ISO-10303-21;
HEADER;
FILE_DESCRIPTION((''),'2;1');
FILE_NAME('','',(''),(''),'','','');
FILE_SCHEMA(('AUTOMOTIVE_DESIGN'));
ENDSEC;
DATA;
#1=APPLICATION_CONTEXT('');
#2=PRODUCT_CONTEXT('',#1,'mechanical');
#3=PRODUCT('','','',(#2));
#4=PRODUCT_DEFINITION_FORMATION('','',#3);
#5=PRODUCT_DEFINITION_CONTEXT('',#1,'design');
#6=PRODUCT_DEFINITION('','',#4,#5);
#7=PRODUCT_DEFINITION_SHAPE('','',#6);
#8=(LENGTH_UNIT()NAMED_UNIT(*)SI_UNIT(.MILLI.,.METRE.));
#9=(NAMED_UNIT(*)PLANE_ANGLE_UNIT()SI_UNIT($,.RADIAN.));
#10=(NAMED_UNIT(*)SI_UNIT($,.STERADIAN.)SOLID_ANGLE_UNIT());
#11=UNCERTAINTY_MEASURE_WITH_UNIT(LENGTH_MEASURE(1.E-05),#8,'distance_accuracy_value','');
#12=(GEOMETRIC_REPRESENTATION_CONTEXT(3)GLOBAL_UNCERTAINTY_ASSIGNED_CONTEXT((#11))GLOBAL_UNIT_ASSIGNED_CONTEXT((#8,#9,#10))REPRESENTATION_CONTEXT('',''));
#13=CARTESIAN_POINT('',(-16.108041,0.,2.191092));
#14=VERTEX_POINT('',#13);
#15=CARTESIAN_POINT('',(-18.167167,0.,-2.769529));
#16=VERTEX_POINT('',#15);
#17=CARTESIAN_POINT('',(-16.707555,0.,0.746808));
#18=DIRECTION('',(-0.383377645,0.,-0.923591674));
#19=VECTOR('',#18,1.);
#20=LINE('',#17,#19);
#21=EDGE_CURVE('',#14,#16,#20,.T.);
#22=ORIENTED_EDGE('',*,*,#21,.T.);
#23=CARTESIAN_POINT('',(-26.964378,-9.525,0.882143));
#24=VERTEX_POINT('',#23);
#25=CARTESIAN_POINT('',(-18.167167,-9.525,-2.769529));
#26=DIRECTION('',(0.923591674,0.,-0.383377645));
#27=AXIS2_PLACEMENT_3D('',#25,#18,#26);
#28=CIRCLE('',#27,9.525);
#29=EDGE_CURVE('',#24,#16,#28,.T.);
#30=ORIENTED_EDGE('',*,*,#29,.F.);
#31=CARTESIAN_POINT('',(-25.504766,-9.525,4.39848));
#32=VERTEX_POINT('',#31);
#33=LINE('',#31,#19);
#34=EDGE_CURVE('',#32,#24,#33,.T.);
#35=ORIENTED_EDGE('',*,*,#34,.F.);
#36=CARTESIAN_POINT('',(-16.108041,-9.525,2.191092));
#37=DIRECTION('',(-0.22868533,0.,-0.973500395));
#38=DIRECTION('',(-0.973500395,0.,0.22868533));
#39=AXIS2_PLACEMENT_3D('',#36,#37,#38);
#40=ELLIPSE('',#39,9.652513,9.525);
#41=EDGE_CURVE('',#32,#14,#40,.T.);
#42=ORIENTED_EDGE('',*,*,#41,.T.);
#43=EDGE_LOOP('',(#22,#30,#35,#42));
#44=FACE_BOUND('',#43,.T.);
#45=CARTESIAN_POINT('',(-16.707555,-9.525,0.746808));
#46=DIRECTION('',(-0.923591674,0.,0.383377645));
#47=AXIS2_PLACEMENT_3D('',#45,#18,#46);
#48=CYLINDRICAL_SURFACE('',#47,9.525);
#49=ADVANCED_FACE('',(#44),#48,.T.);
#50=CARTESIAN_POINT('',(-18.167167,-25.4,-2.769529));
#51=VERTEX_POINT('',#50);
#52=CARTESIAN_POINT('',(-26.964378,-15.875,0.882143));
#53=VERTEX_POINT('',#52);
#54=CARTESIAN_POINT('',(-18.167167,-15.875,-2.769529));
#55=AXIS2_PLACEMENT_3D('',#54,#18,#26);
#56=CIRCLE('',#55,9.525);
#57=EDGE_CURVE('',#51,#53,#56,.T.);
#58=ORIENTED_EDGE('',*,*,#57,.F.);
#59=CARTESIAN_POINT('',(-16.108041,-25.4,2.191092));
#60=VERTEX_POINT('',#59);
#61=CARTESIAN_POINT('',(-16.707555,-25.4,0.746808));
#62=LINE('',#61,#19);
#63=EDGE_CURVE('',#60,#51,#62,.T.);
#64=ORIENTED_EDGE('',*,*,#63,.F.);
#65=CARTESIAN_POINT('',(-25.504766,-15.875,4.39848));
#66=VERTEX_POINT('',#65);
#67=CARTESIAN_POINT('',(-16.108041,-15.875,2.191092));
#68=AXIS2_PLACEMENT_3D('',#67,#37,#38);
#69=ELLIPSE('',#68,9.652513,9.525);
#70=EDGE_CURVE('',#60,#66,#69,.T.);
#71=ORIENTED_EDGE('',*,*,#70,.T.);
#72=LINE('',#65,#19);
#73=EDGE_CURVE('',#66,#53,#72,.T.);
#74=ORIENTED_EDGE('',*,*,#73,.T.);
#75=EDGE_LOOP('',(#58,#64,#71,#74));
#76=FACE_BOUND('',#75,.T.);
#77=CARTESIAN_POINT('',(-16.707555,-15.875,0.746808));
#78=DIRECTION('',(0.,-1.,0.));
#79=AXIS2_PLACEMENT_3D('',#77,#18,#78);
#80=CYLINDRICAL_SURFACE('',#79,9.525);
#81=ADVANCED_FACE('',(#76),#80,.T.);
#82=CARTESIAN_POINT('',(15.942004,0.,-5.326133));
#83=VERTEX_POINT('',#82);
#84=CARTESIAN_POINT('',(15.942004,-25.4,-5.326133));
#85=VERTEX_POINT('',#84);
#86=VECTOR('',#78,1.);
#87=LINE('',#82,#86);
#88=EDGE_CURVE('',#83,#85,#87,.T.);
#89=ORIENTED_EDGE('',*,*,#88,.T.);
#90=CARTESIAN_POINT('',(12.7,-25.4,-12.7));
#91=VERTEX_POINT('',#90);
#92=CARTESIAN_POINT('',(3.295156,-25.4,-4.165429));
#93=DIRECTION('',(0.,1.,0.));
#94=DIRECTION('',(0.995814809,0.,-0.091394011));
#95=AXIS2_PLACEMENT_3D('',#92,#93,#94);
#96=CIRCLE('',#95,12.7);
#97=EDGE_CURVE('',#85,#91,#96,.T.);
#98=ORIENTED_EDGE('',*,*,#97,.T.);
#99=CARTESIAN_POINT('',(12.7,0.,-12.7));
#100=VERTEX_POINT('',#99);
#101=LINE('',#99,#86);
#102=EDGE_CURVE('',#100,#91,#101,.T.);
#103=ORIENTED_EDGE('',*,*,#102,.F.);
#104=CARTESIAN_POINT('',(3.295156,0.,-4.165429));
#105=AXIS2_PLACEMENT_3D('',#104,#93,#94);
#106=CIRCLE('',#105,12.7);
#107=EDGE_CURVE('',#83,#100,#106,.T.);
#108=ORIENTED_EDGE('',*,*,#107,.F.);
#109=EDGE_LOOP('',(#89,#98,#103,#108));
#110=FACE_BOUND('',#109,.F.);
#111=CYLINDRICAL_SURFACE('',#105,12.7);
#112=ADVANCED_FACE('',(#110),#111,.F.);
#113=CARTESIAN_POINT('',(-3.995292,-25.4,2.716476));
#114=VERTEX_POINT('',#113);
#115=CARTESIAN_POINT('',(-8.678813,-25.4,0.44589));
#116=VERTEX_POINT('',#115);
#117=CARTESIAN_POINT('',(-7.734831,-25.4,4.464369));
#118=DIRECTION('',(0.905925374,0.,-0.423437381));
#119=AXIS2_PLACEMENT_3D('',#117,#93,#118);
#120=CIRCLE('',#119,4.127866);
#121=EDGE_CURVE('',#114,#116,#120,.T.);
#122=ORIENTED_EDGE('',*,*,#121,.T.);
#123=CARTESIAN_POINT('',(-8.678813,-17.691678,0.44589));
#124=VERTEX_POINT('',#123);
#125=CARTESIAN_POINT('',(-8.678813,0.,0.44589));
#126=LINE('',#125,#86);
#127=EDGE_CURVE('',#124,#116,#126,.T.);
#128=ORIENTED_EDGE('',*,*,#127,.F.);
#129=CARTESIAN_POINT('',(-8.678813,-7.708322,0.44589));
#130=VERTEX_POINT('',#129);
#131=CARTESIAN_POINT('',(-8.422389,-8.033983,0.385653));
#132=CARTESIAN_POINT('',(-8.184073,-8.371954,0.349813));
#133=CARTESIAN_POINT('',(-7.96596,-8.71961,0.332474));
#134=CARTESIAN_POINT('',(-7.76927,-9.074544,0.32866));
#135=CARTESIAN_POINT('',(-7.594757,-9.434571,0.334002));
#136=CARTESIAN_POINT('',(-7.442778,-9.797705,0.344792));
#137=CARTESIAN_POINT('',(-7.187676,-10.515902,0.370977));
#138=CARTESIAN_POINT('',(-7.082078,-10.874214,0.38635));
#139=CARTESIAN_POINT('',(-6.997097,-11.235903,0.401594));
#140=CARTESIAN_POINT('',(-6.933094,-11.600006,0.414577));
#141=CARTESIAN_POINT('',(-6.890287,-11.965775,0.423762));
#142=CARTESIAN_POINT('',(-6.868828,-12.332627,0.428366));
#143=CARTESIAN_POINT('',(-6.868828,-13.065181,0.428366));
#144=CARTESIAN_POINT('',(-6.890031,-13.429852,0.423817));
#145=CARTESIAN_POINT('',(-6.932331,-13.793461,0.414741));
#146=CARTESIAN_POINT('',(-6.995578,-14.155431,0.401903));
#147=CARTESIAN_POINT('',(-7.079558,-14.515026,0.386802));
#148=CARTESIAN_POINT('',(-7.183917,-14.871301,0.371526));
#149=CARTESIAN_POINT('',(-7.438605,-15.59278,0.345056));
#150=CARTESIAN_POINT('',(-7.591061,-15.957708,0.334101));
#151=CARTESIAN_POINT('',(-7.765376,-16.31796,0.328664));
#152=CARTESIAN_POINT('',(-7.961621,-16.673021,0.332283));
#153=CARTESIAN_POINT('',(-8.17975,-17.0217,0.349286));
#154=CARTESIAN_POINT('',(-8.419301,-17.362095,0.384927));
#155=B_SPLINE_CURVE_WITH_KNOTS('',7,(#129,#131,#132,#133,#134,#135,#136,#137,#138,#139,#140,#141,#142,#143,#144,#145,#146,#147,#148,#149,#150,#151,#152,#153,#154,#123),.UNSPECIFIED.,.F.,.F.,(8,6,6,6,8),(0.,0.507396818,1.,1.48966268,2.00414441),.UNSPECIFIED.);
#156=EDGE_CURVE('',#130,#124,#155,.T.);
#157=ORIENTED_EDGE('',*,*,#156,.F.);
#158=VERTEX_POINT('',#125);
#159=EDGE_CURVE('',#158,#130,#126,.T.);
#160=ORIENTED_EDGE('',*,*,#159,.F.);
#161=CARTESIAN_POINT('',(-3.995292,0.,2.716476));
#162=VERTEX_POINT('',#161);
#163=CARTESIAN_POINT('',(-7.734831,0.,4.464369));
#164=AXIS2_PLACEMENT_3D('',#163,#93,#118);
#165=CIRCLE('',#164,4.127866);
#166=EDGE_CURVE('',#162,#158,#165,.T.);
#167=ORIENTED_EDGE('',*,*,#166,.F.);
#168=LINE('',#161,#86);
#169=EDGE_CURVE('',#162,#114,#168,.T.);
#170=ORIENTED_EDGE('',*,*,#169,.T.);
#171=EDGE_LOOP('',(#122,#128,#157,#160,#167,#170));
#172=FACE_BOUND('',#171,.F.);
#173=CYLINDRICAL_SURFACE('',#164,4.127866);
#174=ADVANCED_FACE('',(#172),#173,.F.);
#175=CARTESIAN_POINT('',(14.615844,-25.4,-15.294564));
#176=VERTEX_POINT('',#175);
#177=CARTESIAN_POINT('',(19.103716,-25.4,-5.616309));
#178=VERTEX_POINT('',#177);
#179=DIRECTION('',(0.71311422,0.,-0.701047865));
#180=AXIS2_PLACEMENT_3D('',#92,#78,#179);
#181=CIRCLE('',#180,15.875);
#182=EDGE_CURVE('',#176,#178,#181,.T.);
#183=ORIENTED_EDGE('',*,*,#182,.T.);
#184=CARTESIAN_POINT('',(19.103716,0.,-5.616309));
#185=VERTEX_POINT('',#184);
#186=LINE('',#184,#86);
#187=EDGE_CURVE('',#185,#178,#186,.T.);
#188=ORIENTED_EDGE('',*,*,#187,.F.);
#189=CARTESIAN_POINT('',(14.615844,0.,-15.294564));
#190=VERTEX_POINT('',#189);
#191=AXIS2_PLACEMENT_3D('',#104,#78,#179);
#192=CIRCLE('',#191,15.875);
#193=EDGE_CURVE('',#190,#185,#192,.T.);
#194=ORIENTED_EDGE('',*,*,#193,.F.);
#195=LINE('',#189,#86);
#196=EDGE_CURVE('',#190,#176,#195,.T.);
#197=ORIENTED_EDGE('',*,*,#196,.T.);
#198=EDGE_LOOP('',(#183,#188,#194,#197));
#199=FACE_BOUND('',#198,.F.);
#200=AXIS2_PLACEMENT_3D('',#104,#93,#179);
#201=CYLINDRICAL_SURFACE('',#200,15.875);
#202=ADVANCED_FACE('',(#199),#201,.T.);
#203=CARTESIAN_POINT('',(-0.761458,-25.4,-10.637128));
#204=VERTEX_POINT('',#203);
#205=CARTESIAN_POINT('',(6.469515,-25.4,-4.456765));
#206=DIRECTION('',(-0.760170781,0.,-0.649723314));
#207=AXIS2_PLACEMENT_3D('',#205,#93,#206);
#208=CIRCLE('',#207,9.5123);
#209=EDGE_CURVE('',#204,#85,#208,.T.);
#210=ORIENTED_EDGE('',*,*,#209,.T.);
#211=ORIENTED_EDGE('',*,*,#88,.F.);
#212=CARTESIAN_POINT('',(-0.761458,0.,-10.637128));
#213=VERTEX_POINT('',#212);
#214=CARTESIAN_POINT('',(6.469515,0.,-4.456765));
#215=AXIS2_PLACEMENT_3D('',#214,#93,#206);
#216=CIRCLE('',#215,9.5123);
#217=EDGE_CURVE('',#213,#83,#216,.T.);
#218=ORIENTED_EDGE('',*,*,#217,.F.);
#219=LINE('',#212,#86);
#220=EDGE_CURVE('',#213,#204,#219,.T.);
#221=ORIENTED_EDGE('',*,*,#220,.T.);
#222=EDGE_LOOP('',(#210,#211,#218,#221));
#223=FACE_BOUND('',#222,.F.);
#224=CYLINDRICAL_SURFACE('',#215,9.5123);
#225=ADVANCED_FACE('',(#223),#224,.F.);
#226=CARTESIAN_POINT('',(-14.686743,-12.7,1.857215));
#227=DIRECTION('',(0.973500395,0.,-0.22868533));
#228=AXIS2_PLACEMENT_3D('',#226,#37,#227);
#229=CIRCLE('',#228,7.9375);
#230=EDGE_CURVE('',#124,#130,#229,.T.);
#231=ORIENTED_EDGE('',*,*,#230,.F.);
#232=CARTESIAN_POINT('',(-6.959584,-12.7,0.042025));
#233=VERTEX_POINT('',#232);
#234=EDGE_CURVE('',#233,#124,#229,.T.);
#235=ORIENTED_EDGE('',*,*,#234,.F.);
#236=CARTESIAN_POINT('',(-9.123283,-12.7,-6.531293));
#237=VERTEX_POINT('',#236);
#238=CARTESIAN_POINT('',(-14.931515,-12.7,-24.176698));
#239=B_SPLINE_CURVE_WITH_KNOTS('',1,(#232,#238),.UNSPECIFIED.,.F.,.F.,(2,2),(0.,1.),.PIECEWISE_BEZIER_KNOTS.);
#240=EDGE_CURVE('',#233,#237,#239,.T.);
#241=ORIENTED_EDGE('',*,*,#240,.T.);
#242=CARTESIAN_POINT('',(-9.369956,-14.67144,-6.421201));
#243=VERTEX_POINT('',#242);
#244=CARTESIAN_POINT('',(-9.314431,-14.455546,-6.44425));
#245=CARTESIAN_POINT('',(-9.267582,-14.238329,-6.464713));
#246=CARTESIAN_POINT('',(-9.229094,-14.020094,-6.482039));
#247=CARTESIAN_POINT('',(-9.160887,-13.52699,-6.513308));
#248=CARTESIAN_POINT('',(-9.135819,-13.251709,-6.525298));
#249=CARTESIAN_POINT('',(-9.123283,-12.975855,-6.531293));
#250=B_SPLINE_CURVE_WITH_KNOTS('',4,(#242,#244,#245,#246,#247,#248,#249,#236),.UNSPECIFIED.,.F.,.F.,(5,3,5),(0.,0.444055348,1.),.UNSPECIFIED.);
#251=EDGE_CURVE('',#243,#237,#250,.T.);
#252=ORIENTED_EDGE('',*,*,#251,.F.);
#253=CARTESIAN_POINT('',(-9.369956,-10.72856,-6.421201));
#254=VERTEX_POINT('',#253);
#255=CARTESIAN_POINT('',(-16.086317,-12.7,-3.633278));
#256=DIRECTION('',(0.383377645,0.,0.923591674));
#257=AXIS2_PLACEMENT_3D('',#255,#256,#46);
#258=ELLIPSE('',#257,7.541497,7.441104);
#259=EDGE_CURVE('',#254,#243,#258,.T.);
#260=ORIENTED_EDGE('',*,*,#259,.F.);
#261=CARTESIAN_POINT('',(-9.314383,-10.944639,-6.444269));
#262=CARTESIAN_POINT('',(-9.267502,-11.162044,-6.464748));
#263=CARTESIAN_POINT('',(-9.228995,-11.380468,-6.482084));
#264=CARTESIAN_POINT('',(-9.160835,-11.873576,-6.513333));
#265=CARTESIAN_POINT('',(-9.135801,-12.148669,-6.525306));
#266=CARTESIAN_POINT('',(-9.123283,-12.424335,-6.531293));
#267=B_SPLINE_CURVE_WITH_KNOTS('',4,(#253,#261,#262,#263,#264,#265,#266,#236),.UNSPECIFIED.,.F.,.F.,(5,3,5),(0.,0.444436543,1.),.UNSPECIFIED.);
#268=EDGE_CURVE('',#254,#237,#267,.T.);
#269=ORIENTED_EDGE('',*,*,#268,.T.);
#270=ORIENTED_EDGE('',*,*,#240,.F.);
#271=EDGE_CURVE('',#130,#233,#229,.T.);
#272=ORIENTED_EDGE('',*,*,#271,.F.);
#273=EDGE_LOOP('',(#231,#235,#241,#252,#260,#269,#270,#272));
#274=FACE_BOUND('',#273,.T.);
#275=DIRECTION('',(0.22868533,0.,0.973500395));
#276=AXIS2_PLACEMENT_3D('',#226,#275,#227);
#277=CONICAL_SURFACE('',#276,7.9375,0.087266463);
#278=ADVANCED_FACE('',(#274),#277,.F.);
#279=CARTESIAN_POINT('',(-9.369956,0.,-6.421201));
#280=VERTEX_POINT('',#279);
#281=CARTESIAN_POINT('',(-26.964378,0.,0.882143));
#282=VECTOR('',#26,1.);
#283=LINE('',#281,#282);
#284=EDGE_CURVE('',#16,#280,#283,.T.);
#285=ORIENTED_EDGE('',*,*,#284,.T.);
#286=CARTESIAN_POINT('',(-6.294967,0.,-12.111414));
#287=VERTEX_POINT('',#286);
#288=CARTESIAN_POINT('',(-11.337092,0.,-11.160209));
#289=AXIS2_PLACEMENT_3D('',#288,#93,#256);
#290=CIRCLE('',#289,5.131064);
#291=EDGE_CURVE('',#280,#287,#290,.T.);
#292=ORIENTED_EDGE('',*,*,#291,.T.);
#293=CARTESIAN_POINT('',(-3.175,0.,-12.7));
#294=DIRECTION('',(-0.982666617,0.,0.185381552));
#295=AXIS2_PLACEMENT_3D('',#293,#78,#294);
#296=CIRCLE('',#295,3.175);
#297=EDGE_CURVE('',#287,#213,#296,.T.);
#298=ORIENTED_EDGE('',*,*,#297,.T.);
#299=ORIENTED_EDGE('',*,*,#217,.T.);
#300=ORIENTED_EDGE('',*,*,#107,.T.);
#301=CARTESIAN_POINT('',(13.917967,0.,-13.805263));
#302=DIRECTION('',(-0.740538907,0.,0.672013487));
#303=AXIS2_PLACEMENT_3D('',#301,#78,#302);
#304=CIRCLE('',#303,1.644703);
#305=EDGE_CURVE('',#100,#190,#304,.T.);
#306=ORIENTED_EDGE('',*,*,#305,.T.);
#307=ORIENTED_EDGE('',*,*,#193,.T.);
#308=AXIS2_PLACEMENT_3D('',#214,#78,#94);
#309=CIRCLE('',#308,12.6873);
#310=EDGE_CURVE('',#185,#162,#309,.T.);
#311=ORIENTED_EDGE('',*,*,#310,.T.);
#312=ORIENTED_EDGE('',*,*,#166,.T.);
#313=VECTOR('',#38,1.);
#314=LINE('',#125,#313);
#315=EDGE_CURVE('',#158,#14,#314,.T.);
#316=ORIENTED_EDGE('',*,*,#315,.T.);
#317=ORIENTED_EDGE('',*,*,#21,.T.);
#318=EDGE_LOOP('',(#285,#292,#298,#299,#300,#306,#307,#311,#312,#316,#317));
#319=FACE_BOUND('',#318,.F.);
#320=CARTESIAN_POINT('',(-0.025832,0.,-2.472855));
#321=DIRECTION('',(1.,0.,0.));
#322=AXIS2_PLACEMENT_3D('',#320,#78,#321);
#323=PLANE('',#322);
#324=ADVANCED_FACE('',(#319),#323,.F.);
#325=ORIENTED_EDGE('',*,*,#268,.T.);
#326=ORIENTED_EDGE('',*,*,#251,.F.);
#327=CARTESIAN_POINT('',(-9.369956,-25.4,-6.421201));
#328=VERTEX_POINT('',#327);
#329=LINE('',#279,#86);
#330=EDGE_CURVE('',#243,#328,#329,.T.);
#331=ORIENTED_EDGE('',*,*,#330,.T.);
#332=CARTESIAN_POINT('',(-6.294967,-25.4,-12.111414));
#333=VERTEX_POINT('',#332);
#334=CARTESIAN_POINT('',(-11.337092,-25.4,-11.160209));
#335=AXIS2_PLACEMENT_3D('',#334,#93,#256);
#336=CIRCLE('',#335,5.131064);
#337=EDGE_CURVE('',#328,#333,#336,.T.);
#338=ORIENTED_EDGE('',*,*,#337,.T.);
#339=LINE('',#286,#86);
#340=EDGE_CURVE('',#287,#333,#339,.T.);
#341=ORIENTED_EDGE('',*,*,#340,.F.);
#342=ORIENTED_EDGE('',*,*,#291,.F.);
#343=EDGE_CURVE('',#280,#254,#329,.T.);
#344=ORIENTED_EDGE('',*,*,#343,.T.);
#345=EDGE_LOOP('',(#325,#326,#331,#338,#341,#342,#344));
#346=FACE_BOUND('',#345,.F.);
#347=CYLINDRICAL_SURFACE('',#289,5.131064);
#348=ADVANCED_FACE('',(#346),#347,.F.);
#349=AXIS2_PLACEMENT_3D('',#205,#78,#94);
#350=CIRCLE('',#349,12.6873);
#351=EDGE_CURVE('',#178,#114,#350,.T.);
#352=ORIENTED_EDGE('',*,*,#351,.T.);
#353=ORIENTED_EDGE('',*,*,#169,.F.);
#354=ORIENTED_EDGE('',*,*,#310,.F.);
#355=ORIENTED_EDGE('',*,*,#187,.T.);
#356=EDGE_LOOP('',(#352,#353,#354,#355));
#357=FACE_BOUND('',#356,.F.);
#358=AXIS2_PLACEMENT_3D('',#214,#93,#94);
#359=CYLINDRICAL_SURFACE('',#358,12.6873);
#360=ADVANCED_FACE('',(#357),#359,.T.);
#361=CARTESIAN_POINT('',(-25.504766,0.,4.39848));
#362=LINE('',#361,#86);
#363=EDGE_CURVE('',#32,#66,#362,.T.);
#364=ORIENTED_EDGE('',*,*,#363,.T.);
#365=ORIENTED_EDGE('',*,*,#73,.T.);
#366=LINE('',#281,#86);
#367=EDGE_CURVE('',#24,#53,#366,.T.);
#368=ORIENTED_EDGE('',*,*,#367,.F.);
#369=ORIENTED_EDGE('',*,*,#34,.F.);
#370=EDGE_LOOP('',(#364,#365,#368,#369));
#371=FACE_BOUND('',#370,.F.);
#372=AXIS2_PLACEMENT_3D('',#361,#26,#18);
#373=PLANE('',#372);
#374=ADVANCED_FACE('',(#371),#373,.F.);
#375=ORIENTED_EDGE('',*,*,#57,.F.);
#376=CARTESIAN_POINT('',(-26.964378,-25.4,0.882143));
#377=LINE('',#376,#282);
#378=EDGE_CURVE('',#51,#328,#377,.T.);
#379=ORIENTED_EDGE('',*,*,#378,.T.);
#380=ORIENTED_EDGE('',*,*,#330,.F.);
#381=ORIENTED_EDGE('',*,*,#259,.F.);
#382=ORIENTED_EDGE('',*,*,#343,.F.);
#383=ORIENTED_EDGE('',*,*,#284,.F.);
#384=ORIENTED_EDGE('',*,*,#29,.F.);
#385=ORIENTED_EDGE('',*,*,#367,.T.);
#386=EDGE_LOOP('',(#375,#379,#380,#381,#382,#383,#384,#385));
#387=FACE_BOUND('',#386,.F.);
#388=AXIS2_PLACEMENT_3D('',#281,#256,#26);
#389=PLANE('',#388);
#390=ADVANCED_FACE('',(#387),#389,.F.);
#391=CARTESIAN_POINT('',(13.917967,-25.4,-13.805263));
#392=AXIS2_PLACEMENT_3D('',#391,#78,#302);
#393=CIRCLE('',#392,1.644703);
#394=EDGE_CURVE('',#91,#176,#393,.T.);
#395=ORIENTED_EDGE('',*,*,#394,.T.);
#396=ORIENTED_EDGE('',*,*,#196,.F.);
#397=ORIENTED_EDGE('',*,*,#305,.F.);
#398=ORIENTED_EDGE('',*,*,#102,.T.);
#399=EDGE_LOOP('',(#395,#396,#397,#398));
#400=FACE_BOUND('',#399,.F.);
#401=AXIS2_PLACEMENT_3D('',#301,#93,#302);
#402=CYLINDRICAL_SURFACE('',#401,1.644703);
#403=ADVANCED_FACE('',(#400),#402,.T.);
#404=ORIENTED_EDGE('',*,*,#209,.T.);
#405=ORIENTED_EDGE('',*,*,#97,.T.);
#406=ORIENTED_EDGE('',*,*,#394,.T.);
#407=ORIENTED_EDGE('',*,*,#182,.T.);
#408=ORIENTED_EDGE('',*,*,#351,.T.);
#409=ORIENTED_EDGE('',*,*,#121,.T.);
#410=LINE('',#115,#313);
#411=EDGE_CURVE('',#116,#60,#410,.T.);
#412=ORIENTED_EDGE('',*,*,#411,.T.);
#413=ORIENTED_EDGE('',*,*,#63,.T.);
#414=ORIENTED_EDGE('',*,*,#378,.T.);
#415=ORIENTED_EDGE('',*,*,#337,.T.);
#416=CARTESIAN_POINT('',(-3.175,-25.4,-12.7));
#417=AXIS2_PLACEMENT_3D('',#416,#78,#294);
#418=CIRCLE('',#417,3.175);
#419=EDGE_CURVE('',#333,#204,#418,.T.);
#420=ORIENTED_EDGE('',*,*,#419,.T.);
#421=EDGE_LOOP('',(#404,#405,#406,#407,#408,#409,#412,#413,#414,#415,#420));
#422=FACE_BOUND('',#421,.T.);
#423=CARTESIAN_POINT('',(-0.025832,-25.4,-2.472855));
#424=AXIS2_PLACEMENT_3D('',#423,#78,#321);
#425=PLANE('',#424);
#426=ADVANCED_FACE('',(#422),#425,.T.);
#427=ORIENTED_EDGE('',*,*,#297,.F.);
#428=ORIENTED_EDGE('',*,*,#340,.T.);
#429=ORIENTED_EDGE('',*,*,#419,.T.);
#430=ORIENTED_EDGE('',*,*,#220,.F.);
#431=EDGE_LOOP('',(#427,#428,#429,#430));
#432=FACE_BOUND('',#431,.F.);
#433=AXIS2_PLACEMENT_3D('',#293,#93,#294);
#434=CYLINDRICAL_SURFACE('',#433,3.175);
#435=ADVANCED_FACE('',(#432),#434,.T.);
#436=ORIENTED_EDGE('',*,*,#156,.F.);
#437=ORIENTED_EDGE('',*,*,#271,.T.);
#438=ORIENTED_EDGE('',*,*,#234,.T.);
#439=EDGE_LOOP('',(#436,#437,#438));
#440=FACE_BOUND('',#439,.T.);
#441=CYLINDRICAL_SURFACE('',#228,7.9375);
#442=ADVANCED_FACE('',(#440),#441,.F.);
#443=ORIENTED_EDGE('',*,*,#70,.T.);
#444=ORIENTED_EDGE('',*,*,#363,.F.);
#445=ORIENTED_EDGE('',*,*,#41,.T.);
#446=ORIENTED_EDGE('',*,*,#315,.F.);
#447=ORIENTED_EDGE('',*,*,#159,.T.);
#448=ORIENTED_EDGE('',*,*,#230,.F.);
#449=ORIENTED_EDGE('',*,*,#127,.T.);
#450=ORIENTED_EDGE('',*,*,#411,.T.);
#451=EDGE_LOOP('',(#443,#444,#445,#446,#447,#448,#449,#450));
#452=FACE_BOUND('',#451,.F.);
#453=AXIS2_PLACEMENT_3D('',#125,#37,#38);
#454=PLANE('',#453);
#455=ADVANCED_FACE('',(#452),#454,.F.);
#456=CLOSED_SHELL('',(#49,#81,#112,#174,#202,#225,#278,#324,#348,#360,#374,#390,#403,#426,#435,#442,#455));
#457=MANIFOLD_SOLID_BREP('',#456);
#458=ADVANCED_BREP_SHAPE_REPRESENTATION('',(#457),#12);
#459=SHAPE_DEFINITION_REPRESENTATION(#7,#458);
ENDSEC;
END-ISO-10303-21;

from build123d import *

# Parameters (mm, degrees)
F1_DEPTH      = 25.4
F2_R          = 7.9375
F3_DEPTH      = 25.4
F3_TAPER      = 5
F3_DEPTH_BACK = 25.4
F4_R          = 9.525


with BuildPart() as f1:
    # F0 (on Front) → F1 (new body)
    with BuildSketch(Plane.XZ):
        with BuildLine():
            ThreePointArc((15.9420039577, -5.3261326592), (14.9211079736, -9.2769096997), (12.7, -12.7))
            ThreePointArc((12.7, -12.7), (12.5948783029, -14.7822408301), (14.6158441263, -15.2945635671))
            ThreePointArc((14.6158441263, -15.2945635671), (17.697106564, -10.8437100374), (19.1037159776, -5.6163086455))
            ThreePointArc((19.1037159776, -5.6163086455), (10.77478978, 7.4777303194), (-3.9952923544, 2.7164760977))
            ThreePointArc((-3.9952923544, 2.7164760977), (-5.934088224, 0.7499909222), (-8.6788133112, 0.4458896807))
            Line((-8.6788133112, 0.4458896807), (-25.5047661099, 4.3984803395))
            Line((-25.5047661099, 4.3984803395), (-26.9643777894, 0.8821428277))
            Line((-26.9643777894, 0.8821428277), (-9.3699563909, -6.421201314))
            ThreePointArc((-9.3699563909, -6.421201314), (-6.8229957257, -8.720792311), (-6.2949665087, -12.1114135711))
            ThreePointArc((-6.2949665087, -12.1114135711), (-2.3576029431, -15.767977681), (-0.7614577713, -10.6371284795))
            ThreePointArc((-0.7614577713, -10.6371284795), (3.5871947735, 4.6083370701), (15.9420039577, -5.3261326592))
        make_face()
    extrude(amount=F1_DEPTH)

    # F2 (on face) → F3 (cut, two sides)
    with BuildSketch(Plane(origin=(-0.354609422, 0, -1.5095520662), x_dir=(0.9735003954, 0, -0.22868533), z_dir=(0.22868533, 0, 0.9735003954))) as f3_sk:
        with Locations((-14.7222678204, -12.7)):
            Circle(F2_R)
    extrude(amount=-F3_DEPTH, taper=F3_TAPER, mode=Mode.SUBTRACT)
    extrude(f3_sk.sketch, amount=F3_DEPTH_BACK, mode=Mode.SUBTRACT)

    # F4
    f4_edges = [f1.edges().sort_by_distance(p)[0] for p in [
        (-26.234572, 0, 2.640312),
        (-26.234572, -25.4, 2.640312),
    ]]
    fillet(f4_edges, radius=F4_R)


solid = f1.part
